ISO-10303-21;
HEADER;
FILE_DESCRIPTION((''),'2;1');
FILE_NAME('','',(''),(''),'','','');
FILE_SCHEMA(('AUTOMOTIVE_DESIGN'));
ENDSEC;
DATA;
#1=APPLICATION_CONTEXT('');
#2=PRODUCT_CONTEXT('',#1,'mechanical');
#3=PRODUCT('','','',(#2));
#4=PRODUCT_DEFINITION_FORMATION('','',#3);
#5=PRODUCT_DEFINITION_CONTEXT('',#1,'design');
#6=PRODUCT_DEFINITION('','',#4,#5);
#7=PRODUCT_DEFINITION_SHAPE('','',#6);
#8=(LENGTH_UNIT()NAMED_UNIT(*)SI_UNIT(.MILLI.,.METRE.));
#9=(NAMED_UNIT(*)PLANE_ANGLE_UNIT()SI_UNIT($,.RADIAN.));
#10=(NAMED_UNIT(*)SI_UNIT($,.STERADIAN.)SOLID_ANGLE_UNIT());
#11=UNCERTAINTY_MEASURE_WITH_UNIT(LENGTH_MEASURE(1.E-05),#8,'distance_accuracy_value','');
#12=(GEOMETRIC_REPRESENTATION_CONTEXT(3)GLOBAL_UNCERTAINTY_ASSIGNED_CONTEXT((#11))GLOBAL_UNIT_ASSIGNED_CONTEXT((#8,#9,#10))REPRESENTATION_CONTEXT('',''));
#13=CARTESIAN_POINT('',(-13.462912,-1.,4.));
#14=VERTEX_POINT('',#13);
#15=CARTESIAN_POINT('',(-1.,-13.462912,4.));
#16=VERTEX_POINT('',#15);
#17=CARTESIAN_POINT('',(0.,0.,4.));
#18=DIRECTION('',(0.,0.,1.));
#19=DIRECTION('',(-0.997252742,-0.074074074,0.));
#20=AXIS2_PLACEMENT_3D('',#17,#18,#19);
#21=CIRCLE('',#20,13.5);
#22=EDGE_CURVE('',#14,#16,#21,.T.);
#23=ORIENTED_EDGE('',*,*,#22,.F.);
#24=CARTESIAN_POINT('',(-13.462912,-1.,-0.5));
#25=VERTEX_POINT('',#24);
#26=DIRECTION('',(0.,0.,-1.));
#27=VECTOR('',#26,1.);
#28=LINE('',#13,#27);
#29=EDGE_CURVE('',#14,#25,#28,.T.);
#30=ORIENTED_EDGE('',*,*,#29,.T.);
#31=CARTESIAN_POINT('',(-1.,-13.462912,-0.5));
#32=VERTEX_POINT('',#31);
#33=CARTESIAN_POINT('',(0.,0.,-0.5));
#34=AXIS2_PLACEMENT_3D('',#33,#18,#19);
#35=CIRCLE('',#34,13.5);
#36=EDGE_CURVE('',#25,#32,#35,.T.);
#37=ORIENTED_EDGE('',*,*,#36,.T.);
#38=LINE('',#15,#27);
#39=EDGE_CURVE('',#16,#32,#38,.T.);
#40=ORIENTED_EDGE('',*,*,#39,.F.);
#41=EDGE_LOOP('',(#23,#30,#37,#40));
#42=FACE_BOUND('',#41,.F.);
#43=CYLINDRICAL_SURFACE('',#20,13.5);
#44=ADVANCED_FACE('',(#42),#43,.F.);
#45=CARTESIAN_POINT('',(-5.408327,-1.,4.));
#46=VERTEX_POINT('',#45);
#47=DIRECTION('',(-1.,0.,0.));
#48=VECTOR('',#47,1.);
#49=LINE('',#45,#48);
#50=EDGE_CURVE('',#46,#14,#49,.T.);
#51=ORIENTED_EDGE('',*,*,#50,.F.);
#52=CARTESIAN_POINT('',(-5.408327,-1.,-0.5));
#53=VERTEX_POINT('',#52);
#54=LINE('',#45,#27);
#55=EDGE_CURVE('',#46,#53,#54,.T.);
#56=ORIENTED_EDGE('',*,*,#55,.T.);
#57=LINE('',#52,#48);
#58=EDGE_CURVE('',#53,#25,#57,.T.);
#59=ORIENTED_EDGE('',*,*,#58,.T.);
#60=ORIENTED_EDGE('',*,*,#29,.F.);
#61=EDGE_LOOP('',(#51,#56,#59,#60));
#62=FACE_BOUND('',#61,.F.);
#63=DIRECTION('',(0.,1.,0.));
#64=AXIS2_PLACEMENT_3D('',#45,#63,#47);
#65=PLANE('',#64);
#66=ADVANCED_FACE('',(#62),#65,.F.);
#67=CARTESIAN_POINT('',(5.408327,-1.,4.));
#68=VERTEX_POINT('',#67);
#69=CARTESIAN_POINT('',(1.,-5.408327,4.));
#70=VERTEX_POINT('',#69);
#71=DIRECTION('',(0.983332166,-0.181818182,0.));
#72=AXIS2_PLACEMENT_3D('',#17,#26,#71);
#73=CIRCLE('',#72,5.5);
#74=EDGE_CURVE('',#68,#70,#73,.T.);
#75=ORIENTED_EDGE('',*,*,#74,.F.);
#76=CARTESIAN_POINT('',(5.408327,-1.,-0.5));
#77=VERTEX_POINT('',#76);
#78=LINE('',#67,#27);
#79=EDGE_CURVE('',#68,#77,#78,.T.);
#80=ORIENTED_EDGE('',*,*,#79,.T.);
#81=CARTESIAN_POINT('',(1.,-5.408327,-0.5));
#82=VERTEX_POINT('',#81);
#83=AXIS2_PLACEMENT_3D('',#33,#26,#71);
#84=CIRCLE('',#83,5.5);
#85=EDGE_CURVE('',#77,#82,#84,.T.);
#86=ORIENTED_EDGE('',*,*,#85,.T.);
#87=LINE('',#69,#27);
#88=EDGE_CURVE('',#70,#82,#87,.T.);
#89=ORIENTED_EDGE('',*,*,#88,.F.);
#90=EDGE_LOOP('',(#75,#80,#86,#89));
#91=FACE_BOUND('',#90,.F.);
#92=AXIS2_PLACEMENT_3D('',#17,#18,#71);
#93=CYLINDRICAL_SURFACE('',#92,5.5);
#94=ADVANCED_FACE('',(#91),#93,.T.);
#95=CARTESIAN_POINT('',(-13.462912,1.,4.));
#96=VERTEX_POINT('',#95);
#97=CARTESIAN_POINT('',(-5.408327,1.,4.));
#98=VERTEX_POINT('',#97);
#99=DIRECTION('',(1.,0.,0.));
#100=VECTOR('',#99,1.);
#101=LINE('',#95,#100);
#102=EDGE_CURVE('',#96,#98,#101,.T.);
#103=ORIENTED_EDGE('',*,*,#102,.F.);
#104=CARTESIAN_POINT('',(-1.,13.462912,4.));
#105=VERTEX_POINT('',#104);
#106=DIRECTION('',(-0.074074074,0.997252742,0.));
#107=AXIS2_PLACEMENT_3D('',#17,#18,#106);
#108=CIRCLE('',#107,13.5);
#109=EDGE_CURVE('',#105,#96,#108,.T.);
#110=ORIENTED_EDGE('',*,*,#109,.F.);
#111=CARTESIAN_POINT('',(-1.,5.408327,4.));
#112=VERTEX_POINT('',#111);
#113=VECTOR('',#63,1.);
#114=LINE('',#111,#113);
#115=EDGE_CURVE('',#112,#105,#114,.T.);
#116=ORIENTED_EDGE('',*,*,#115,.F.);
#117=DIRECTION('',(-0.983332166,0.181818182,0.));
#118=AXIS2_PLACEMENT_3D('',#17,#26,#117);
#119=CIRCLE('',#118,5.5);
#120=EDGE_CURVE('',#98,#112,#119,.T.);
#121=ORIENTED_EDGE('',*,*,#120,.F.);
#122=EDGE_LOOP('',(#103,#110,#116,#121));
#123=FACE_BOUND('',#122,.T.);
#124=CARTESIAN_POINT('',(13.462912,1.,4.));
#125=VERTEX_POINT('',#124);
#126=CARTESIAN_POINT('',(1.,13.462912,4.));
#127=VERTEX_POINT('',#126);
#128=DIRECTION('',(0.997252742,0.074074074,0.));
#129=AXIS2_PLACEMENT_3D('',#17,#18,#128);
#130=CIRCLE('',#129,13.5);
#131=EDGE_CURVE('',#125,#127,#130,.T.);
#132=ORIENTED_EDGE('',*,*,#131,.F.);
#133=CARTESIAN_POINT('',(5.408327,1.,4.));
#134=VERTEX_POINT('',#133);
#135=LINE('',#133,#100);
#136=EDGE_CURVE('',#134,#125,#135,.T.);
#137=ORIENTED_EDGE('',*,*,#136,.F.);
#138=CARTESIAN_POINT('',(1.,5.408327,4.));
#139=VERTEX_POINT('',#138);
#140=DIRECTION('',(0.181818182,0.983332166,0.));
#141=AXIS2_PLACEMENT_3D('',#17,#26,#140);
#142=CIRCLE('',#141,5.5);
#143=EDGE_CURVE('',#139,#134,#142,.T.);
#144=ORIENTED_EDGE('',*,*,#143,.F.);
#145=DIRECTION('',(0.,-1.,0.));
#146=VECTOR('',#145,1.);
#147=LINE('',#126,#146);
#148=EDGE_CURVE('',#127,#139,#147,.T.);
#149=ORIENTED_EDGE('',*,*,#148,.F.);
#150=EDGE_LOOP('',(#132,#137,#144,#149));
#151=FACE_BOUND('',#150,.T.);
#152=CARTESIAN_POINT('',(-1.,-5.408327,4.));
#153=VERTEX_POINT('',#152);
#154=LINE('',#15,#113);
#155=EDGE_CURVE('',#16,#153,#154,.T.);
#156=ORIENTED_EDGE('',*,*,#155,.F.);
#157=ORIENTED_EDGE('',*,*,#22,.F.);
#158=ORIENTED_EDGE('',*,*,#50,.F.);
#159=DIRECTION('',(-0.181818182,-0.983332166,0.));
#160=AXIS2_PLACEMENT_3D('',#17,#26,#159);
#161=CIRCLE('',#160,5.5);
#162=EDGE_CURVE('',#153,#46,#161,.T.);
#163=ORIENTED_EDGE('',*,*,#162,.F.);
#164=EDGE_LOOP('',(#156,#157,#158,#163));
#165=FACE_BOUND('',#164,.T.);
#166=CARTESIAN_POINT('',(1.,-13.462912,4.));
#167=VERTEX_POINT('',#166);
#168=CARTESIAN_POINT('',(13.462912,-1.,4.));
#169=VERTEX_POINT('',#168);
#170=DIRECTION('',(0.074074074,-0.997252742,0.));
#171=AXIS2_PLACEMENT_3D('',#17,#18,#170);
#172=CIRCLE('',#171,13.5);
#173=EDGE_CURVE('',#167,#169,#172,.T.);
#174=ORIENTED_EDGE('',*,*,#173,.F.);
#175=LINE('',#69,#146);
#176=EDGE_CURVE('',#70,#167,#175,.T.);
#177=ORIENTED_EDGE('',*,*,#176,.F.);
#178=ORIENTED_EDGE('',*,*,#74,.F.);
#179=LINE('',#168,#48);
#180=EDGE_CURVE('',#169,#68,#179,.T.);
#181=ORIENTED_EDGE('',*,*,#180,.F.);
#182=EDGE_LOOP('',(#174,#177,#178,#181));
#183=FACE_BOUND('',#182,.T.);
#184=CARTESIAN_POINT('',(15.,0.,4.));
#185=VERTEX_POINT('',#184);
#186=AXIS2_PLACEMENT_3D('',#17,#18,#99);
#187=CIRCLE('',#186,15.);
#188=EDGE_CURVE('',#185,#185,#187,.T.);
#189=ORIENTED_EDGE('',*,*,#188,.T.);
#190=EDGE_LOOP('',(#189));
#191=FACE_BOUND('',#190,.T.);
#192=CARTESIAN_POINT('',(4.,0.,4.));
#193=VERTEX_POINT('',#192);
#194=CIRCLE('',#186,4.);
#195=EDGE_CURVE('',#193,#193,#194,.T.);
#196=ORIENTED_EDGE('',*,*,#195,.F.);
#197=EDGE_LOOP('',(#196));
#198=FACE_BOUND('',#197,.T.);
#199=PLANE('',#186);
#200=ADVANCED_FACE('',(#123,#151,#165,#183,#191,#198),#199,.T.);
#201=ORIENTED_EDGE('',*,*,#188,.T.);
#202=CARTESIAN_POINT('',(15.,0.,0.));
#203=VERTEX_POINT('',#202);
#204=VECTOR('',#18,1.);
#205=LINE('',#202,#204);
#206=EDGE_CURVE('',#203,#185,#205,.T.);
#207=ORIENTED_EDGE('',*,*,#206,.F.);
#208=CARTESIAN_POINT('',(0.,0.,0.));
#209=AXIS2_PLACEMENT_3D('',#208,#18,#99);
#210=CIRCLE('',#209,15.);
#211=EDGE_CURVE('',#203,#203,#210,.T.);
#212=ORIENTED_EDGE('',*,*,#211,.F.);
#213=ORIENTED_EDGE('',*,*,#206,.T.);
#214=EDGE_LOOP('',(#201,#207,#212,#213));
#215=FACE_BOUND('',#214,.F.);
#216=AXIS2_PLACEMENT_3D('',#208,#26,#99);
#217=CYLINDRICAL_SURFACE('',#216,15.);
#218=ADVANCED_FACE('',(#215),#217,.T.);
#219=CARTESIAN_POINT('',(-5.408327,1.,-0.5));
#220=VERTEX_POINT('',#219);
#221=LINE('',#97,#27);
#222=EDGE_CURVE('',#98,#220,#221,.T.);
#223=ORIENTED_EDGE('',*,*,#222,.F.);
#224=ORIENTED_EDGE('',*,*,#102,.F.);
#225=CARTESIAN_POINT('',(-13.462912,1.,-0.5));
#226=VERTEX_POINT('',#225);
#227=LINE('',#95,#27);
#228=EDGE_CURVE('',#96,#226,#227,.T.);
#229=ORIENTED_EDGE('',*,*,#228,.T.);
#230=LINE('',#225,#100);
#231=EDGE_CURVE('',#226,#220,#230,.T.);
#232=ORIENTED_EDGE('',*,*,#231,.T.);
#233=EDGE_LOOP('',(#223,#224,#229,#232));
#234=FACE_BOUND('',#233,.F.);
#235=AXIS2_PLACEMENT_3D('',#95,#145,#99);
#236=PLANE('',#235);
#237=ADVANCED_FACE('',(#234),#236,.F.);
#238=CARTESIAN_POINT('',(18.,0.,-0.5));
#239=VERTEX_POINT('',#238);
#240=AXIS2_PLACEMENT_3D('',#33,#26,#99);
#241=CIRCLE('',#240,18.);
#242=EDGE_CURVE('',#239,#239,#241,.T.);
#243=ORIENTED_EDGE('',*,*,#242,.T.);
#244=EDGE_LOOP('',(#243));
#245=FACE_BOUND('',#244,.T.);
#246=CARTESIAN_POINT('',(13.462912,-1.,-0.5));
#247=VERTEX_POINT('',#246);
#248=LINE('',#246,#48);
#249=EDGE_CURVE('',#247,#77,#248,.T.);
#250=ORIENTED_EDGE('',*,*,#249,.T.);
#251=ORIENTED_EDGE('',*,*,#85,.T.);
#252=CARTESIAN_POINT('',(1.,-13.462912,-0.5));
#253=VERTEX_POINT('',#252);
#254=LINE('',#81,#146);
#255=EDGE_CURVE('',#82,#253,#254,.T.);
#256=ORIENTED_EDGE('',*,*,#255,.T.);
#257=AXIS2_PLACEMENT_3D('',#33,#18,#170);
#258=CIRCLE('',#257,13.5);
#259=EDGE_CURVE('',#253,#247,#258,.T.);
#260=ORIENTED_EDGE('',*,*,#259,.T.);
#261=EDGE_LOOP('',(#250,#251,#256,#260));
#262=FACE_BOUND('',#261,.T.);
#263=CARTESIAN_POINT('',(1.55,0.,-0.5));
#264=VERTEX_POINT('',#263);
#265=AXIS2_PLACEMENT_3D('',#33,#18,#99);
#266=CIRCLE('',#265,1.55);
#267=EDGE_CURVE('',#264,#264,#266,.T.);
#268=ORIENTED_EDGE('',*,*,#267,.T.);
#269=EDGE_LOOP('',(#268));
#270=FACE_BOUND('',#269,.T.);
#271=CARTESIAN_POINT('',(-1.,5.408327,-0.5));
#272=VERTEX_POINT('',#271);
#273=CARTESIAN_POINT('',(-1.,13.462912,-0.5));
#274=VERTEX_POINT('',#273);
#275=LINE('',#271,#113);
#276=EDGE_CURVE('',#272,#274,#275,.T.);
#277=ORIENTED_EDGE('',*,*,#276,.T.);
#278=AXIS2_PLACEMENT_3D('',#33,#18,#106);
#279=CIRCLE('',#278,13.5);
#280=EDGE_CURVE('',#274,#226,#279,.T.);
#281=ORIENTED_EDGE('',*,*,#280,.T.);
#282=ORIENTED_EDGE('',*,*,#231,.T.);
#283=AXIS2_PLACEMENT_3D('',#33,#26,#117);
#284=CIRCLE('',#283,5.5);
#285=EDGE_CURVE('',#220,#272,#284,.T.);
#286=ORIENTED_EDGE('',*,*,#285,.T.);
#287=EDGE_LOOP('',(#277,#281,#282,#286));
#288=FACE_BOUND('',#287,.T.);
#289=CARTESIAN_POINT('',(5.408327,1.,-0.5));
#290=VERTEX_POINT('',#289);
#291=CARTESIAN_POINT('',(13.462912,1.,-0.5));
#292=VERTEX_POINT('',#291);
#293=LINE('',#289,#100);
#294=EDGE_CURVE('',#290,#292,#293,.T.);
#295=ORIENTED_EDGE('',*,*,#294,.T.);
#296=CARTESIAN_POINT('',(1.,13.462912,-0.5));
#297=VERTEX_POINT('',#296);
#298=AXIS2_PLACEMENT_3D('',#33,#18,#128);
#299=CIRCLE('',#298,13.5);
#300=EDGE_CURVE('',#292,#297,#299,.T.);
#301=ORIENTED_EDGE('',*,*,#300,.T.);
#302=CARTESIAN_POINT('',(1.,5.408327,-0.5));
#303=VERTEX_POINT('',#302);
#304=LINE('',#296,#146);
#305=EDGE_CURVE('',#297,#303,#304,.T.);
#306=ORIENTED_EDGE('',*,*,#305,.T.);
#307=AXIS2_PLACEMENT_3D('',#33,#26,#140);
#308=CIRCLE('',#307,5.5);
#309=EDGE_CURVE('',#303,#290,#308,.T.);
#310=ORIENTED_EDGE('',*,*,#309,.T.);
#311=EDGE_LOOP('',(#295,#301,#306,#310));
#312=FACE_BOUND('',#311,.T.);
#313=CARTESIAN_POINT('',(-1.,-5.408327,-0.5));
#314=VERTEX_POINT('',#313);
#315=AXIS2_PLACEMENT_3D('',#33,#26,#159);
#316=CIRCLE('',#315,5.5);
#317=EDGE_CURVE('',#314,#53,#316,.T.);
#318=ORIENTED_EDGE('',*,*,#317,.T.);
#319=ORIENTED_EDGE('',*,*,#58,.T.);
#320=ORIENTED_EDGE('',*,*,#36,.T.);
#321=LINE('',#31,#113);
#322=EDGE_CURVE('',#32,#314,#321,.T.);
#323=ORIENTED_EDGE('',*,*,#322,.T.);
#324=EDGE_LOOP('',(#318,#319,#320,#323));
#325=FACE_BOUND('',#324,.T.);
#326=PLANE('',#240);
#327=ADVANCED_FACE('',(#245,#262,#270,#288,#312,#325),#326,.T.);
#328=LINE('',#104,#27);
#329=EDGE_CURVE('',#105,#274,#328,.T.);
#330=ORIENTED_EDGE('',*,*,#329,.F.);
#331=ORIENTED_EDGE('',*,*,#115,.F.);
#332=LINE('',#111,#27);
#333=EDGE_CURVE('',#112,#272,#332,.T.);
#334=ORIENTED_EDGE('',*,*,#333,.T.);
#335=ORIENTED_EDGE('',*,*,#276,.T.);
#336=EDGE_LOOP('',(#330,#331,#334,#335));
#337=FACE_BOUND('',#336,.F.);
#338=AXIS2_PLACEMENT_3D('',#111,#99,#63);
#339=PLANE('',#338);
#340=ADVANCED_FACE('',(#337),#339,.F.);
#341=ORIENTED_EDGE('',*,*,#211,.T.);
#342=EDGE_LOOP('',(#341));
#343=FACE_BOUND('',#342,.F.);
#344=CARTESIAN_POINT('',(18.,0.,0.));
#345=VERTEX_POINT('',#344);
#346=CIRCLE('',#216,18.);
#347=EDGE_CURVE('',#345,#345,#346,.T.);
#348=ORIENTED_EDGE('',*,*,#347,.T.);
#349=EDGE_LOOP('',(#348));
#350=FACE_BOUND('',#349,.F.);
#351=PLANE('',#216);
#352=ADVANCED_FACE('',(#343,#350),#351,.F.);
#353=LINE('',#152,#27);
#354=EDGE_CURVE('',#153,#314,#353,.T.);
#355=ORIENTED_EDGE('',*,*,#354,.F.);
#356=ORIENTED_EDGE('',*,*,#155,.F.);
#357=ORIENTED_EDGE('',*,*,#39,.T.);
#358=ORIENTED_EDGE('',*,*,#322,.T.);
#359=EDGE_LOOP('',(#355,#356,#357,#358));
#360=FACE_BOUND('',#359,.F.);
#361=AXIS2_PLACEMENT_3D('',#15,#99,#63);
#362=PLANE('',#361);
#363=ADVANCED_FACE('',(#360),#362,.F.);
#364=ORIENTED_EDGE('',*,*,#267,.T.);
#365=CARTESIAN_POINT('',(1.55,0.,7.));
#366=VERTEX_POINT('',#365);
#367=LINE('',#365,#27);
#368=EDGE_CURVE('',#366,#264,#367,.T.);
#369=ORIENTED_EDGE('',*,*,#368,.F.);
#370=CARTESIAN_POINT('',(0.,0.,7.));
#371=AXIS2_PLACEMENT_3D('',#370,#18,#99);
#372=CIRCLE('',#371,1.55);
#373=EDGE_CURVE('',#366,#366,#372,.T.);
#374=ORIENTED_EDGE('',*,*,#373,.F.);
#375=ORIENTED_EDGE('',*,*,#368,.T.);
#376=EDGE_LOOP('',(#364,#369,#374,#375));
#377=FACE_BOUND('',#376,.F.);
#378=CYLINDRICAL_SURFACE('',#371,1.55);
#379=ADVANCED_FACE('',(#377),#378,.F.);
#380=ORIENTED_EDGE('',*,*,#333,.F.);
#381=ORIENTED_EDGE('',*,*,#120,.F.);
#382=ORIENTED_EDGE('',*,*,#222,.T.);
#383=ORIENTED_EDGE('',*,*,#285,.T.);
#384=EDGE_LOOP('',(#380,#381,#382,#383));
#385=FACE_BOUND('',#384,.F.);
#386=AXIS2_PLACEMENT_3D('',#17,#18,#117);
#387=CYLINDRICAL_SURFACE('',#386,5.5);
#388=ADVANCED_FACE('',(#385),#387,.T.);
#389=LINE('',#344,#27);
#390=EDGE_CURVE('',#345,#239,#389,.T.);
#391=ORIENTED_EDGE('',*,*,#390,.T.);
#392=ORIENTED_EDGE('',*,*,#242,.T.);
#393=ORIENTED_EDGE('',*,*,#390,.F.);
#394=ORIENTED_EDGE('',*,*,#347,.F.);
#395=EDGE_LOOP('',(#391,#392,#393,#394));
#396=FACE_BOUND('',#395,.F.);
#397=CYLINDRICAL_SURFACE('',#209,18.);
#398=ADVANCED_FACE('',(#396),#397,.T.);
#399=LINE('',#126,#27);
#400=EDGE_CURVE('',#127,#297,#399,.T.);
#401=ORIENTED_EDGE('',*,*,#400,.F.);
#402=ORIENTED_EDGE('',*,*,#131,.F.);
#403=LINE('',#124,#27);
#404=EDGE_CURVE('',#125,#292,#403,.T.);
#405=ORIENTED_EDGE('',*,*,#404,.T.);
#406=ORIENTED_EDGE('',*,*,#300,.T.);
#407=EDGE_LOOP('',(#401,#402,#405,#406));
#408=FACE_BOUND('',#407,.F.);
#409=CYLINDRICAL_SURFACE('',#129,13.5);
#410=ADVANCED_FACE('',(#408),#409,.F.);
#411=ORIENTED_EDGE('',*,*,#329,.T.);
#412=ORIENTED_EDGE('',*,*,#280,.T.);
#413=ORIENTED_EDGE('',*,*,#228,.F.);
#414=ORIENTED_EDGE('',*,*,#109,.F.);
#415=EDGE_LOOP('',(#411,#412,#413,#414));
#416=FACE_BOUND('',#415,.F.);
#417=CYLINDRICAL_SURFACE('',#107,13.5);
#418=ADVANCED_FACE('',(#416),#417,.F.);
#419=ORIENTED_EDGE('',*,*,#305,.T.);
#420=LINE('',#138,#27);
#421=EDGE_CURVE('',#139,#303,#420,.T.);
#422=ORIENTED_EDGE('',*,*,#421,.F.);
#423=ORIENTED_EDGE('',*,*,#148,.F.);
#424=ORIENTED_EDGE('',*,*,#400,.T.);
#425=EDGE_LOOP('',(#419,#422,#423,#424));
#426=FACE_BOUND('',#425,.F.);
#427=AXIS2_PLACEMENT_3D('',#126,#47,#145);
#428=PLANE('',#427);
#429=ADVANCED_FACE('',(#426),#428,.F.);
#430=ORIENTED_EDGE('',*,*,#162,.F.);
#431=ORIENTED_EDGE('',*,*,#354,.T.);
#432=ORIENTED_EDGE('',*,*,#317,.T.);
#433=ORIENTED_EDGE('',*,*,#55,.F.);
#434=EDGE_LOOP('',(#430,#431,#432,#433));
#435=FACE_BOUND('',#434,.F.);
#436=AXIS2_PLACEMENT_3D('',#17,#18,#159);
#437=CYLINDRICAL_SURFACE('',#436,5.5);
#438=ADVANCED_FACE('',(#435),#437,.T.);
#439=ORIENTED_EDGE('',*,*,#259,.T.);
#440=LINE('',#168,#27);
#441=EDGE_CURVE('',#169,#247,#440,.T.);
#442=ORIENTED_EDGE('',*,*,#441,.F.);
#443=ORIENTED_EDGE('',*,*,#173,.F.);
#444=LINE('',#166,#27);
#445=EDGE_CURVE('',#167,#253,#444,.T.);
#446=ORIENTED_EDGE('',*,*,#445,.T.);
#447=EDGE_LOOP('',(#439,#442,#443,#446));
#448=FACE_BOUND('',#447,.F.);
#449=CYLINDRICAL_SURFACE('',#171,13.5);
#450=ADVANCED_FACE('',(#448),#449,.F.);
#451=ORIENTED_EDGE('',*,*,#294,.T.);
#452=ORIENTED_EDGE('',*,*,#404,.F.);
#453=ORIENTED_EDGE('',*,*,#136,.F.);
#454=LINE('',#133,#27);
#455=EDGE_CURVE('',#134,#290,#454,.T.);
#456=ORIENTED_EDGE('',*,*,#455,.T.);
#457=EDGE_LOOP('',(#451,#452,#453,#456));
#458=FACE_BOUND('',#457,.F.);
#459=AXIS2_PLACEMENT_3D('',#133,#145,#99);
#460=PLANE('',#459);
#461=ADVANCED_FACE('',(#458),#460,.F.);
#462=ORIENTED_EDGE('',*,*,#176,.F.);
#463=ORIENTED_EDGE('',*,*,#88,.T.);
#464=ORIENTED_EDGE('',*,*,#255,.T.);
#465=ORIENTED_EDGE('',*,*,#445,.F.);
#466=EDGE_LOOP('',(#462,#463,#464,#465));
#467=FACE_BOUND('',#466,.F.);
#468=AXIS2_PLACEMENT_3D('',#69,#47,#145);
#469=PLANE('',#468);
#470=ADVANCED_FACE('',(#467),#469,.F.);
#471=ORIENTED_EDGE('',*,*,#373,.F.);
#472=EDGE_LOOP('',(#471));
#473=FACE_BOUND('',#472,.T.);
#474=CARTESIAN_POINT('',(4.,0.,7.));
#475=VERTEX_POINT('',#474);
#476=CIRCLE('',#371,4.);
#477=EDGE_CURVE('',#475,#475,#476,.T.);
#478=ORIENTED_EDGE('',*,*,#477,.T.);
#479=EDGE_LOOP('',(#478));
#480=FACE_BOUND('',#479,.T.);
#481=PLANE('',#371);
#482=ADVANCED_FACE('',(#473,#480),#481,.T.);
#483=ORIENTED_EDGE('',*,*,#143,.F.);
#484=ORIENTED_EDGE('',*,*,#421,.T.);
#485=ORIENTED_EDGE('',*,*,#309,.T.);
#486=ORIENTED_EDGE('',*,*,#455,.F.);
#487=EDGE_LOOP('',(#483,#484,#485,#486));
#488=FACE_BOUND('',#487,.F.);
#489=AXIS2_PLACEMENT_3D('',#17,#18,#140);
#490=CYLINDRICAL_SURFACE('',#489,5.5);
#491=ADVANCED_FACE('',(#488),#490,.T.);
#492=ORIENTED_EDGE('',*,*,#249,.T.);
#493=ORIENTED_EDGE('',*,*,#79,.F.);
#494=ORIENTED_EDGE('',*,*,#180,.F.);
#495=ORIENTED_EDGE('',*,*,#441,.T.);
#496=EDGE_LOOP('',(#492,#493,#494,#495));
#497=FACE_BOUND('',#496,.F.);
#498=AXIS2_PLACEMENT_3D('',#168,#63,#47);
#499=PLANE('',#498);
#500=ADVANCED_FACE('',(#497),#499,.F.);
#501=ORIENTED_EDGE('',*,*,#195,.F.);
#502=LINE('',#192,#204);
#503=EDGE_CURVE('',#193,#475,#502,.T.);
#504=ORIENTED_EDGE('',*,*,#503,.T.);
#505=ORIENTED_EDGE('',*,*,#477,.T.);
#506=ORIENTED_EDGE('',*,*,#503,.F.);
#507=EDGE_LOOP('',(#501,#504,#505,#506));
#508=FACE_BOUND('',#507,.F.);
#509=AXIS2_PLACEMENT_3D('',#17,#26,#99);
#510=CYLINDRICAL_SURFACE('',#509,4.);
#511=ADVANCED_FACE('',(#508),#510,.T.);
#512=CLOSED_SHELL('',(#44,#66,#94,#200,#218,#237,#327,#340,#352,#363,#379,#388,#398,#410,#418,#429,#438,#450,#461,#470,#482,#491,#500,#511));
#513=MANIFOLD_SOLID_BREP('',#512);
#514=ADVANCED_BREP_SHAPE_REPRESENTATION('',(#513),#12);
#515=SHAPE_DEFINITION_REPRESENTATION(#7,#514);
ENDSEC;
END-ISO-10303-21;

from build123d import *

# Parameters (mm, degrees)
F0_R     = 15
F1_DEPTH = 4
F2_R     = 18
F2_R_2   = 15
F3_DEPTH = 0.5
F4_R     = 4
F5_DEPTH = 3
F6_R     = 1.55
F7_DEPTH = 7.5
F9_DEPTH = 4.5


with BuildPart() as f1:
    # F0 (on Top) → F1 (new body)
    with BuildSketch(Plane.XY):
        Circle(F0_R)
    extrude(amount=F1_DEPTH)

    # F2 (on face) → F3 (join)
    with BuildSketch(Plane(origin=(0, 0, 0), x_dir=(1, 0, 0), z_dir=(0, 0, -1))):
        Circle(F2_R)
        Circle(F2_R_2, mode=Mode.SUBTRACT)
        Circle(F2_R_2)
    extrude(amount=F3_DEPTH)

    # F4 (on face) → F5 (join)
    with BuildSketch(Plane.XY.offset(4)):
        Circle(F4_R)
    extrude(amount=F5_DEPTH)

    # F6 (on face) → F7 (cut, through all)
    with BuildSketch(Plane.XY.offset(7)):
        Circle(F6_R)
    extrude(amount=-F7_DEPTH, mode=Mode.SUBTRACT)

    # F8 (on face) → F9 (cut, through all)
    with BuildSketch(Plane.XY.offset(4)):
        with BuildLine():
            ThreePointArc((-5.4083269132, 1), (-3.8890872965, 3.8890872965), (-1, 5.4083269132))
            Line((-1, 5.4083269132), (-1, 13.4629120178))
            ThreePointArc((-1, 13.4629120178), (-9.545941546, 9.545941546), (-13.4629120178, 1))
            Line((-13.4629120178, 1), (-5.4083269132, 1))
        make_face()
        with BuildLine():
            Line((1, 13.4629120178), (1, 5.4083269132))
            ThreePointArc((1, 5.4083269132), (3.8890872965, 3.8890872965), (5.4083269132, 1))
            Line((5.4083269132, 1), (13.4629120178, 1))
            ThreePointArc((13.4629120178, 1), (9.545941546, 9.545941546), (1, 13.4629120178))
        make_face()
        with BuildLine():
            Line((13.4629120178, -1), (5.4083269132, -1))
            ThreePointArc((5.4083269132, -1), (3.8890872965, -3.8890872965), (1, -5.4083269132))
            Line((1, -5.4083269132), (1, -13.4629120178))
            ThreePointArc((1, -13.4629120178), (9.545941546, -9.545941546), (13.4629120178, -1))
        make_face()
        with BuildLine():
            ThreePointArc((-1, -5.4083269132), (-3.8890872965, -3.8890872965), (-5.4083269132, -1))
            Line((-5.4083269132, -1), (-13.4629120178, -1))
            ThreePointArc((-13.4629120178, -1), (-9.545941546, -9.545941546), (-1, -13.4629120178))
            Line((-1, -13.4629120178), (-1, -5.4083269132))
        make_face()
    extrude(amount=-F9_DEPTH, mode=Mode.SUBTRACT)


solid = f1.part
